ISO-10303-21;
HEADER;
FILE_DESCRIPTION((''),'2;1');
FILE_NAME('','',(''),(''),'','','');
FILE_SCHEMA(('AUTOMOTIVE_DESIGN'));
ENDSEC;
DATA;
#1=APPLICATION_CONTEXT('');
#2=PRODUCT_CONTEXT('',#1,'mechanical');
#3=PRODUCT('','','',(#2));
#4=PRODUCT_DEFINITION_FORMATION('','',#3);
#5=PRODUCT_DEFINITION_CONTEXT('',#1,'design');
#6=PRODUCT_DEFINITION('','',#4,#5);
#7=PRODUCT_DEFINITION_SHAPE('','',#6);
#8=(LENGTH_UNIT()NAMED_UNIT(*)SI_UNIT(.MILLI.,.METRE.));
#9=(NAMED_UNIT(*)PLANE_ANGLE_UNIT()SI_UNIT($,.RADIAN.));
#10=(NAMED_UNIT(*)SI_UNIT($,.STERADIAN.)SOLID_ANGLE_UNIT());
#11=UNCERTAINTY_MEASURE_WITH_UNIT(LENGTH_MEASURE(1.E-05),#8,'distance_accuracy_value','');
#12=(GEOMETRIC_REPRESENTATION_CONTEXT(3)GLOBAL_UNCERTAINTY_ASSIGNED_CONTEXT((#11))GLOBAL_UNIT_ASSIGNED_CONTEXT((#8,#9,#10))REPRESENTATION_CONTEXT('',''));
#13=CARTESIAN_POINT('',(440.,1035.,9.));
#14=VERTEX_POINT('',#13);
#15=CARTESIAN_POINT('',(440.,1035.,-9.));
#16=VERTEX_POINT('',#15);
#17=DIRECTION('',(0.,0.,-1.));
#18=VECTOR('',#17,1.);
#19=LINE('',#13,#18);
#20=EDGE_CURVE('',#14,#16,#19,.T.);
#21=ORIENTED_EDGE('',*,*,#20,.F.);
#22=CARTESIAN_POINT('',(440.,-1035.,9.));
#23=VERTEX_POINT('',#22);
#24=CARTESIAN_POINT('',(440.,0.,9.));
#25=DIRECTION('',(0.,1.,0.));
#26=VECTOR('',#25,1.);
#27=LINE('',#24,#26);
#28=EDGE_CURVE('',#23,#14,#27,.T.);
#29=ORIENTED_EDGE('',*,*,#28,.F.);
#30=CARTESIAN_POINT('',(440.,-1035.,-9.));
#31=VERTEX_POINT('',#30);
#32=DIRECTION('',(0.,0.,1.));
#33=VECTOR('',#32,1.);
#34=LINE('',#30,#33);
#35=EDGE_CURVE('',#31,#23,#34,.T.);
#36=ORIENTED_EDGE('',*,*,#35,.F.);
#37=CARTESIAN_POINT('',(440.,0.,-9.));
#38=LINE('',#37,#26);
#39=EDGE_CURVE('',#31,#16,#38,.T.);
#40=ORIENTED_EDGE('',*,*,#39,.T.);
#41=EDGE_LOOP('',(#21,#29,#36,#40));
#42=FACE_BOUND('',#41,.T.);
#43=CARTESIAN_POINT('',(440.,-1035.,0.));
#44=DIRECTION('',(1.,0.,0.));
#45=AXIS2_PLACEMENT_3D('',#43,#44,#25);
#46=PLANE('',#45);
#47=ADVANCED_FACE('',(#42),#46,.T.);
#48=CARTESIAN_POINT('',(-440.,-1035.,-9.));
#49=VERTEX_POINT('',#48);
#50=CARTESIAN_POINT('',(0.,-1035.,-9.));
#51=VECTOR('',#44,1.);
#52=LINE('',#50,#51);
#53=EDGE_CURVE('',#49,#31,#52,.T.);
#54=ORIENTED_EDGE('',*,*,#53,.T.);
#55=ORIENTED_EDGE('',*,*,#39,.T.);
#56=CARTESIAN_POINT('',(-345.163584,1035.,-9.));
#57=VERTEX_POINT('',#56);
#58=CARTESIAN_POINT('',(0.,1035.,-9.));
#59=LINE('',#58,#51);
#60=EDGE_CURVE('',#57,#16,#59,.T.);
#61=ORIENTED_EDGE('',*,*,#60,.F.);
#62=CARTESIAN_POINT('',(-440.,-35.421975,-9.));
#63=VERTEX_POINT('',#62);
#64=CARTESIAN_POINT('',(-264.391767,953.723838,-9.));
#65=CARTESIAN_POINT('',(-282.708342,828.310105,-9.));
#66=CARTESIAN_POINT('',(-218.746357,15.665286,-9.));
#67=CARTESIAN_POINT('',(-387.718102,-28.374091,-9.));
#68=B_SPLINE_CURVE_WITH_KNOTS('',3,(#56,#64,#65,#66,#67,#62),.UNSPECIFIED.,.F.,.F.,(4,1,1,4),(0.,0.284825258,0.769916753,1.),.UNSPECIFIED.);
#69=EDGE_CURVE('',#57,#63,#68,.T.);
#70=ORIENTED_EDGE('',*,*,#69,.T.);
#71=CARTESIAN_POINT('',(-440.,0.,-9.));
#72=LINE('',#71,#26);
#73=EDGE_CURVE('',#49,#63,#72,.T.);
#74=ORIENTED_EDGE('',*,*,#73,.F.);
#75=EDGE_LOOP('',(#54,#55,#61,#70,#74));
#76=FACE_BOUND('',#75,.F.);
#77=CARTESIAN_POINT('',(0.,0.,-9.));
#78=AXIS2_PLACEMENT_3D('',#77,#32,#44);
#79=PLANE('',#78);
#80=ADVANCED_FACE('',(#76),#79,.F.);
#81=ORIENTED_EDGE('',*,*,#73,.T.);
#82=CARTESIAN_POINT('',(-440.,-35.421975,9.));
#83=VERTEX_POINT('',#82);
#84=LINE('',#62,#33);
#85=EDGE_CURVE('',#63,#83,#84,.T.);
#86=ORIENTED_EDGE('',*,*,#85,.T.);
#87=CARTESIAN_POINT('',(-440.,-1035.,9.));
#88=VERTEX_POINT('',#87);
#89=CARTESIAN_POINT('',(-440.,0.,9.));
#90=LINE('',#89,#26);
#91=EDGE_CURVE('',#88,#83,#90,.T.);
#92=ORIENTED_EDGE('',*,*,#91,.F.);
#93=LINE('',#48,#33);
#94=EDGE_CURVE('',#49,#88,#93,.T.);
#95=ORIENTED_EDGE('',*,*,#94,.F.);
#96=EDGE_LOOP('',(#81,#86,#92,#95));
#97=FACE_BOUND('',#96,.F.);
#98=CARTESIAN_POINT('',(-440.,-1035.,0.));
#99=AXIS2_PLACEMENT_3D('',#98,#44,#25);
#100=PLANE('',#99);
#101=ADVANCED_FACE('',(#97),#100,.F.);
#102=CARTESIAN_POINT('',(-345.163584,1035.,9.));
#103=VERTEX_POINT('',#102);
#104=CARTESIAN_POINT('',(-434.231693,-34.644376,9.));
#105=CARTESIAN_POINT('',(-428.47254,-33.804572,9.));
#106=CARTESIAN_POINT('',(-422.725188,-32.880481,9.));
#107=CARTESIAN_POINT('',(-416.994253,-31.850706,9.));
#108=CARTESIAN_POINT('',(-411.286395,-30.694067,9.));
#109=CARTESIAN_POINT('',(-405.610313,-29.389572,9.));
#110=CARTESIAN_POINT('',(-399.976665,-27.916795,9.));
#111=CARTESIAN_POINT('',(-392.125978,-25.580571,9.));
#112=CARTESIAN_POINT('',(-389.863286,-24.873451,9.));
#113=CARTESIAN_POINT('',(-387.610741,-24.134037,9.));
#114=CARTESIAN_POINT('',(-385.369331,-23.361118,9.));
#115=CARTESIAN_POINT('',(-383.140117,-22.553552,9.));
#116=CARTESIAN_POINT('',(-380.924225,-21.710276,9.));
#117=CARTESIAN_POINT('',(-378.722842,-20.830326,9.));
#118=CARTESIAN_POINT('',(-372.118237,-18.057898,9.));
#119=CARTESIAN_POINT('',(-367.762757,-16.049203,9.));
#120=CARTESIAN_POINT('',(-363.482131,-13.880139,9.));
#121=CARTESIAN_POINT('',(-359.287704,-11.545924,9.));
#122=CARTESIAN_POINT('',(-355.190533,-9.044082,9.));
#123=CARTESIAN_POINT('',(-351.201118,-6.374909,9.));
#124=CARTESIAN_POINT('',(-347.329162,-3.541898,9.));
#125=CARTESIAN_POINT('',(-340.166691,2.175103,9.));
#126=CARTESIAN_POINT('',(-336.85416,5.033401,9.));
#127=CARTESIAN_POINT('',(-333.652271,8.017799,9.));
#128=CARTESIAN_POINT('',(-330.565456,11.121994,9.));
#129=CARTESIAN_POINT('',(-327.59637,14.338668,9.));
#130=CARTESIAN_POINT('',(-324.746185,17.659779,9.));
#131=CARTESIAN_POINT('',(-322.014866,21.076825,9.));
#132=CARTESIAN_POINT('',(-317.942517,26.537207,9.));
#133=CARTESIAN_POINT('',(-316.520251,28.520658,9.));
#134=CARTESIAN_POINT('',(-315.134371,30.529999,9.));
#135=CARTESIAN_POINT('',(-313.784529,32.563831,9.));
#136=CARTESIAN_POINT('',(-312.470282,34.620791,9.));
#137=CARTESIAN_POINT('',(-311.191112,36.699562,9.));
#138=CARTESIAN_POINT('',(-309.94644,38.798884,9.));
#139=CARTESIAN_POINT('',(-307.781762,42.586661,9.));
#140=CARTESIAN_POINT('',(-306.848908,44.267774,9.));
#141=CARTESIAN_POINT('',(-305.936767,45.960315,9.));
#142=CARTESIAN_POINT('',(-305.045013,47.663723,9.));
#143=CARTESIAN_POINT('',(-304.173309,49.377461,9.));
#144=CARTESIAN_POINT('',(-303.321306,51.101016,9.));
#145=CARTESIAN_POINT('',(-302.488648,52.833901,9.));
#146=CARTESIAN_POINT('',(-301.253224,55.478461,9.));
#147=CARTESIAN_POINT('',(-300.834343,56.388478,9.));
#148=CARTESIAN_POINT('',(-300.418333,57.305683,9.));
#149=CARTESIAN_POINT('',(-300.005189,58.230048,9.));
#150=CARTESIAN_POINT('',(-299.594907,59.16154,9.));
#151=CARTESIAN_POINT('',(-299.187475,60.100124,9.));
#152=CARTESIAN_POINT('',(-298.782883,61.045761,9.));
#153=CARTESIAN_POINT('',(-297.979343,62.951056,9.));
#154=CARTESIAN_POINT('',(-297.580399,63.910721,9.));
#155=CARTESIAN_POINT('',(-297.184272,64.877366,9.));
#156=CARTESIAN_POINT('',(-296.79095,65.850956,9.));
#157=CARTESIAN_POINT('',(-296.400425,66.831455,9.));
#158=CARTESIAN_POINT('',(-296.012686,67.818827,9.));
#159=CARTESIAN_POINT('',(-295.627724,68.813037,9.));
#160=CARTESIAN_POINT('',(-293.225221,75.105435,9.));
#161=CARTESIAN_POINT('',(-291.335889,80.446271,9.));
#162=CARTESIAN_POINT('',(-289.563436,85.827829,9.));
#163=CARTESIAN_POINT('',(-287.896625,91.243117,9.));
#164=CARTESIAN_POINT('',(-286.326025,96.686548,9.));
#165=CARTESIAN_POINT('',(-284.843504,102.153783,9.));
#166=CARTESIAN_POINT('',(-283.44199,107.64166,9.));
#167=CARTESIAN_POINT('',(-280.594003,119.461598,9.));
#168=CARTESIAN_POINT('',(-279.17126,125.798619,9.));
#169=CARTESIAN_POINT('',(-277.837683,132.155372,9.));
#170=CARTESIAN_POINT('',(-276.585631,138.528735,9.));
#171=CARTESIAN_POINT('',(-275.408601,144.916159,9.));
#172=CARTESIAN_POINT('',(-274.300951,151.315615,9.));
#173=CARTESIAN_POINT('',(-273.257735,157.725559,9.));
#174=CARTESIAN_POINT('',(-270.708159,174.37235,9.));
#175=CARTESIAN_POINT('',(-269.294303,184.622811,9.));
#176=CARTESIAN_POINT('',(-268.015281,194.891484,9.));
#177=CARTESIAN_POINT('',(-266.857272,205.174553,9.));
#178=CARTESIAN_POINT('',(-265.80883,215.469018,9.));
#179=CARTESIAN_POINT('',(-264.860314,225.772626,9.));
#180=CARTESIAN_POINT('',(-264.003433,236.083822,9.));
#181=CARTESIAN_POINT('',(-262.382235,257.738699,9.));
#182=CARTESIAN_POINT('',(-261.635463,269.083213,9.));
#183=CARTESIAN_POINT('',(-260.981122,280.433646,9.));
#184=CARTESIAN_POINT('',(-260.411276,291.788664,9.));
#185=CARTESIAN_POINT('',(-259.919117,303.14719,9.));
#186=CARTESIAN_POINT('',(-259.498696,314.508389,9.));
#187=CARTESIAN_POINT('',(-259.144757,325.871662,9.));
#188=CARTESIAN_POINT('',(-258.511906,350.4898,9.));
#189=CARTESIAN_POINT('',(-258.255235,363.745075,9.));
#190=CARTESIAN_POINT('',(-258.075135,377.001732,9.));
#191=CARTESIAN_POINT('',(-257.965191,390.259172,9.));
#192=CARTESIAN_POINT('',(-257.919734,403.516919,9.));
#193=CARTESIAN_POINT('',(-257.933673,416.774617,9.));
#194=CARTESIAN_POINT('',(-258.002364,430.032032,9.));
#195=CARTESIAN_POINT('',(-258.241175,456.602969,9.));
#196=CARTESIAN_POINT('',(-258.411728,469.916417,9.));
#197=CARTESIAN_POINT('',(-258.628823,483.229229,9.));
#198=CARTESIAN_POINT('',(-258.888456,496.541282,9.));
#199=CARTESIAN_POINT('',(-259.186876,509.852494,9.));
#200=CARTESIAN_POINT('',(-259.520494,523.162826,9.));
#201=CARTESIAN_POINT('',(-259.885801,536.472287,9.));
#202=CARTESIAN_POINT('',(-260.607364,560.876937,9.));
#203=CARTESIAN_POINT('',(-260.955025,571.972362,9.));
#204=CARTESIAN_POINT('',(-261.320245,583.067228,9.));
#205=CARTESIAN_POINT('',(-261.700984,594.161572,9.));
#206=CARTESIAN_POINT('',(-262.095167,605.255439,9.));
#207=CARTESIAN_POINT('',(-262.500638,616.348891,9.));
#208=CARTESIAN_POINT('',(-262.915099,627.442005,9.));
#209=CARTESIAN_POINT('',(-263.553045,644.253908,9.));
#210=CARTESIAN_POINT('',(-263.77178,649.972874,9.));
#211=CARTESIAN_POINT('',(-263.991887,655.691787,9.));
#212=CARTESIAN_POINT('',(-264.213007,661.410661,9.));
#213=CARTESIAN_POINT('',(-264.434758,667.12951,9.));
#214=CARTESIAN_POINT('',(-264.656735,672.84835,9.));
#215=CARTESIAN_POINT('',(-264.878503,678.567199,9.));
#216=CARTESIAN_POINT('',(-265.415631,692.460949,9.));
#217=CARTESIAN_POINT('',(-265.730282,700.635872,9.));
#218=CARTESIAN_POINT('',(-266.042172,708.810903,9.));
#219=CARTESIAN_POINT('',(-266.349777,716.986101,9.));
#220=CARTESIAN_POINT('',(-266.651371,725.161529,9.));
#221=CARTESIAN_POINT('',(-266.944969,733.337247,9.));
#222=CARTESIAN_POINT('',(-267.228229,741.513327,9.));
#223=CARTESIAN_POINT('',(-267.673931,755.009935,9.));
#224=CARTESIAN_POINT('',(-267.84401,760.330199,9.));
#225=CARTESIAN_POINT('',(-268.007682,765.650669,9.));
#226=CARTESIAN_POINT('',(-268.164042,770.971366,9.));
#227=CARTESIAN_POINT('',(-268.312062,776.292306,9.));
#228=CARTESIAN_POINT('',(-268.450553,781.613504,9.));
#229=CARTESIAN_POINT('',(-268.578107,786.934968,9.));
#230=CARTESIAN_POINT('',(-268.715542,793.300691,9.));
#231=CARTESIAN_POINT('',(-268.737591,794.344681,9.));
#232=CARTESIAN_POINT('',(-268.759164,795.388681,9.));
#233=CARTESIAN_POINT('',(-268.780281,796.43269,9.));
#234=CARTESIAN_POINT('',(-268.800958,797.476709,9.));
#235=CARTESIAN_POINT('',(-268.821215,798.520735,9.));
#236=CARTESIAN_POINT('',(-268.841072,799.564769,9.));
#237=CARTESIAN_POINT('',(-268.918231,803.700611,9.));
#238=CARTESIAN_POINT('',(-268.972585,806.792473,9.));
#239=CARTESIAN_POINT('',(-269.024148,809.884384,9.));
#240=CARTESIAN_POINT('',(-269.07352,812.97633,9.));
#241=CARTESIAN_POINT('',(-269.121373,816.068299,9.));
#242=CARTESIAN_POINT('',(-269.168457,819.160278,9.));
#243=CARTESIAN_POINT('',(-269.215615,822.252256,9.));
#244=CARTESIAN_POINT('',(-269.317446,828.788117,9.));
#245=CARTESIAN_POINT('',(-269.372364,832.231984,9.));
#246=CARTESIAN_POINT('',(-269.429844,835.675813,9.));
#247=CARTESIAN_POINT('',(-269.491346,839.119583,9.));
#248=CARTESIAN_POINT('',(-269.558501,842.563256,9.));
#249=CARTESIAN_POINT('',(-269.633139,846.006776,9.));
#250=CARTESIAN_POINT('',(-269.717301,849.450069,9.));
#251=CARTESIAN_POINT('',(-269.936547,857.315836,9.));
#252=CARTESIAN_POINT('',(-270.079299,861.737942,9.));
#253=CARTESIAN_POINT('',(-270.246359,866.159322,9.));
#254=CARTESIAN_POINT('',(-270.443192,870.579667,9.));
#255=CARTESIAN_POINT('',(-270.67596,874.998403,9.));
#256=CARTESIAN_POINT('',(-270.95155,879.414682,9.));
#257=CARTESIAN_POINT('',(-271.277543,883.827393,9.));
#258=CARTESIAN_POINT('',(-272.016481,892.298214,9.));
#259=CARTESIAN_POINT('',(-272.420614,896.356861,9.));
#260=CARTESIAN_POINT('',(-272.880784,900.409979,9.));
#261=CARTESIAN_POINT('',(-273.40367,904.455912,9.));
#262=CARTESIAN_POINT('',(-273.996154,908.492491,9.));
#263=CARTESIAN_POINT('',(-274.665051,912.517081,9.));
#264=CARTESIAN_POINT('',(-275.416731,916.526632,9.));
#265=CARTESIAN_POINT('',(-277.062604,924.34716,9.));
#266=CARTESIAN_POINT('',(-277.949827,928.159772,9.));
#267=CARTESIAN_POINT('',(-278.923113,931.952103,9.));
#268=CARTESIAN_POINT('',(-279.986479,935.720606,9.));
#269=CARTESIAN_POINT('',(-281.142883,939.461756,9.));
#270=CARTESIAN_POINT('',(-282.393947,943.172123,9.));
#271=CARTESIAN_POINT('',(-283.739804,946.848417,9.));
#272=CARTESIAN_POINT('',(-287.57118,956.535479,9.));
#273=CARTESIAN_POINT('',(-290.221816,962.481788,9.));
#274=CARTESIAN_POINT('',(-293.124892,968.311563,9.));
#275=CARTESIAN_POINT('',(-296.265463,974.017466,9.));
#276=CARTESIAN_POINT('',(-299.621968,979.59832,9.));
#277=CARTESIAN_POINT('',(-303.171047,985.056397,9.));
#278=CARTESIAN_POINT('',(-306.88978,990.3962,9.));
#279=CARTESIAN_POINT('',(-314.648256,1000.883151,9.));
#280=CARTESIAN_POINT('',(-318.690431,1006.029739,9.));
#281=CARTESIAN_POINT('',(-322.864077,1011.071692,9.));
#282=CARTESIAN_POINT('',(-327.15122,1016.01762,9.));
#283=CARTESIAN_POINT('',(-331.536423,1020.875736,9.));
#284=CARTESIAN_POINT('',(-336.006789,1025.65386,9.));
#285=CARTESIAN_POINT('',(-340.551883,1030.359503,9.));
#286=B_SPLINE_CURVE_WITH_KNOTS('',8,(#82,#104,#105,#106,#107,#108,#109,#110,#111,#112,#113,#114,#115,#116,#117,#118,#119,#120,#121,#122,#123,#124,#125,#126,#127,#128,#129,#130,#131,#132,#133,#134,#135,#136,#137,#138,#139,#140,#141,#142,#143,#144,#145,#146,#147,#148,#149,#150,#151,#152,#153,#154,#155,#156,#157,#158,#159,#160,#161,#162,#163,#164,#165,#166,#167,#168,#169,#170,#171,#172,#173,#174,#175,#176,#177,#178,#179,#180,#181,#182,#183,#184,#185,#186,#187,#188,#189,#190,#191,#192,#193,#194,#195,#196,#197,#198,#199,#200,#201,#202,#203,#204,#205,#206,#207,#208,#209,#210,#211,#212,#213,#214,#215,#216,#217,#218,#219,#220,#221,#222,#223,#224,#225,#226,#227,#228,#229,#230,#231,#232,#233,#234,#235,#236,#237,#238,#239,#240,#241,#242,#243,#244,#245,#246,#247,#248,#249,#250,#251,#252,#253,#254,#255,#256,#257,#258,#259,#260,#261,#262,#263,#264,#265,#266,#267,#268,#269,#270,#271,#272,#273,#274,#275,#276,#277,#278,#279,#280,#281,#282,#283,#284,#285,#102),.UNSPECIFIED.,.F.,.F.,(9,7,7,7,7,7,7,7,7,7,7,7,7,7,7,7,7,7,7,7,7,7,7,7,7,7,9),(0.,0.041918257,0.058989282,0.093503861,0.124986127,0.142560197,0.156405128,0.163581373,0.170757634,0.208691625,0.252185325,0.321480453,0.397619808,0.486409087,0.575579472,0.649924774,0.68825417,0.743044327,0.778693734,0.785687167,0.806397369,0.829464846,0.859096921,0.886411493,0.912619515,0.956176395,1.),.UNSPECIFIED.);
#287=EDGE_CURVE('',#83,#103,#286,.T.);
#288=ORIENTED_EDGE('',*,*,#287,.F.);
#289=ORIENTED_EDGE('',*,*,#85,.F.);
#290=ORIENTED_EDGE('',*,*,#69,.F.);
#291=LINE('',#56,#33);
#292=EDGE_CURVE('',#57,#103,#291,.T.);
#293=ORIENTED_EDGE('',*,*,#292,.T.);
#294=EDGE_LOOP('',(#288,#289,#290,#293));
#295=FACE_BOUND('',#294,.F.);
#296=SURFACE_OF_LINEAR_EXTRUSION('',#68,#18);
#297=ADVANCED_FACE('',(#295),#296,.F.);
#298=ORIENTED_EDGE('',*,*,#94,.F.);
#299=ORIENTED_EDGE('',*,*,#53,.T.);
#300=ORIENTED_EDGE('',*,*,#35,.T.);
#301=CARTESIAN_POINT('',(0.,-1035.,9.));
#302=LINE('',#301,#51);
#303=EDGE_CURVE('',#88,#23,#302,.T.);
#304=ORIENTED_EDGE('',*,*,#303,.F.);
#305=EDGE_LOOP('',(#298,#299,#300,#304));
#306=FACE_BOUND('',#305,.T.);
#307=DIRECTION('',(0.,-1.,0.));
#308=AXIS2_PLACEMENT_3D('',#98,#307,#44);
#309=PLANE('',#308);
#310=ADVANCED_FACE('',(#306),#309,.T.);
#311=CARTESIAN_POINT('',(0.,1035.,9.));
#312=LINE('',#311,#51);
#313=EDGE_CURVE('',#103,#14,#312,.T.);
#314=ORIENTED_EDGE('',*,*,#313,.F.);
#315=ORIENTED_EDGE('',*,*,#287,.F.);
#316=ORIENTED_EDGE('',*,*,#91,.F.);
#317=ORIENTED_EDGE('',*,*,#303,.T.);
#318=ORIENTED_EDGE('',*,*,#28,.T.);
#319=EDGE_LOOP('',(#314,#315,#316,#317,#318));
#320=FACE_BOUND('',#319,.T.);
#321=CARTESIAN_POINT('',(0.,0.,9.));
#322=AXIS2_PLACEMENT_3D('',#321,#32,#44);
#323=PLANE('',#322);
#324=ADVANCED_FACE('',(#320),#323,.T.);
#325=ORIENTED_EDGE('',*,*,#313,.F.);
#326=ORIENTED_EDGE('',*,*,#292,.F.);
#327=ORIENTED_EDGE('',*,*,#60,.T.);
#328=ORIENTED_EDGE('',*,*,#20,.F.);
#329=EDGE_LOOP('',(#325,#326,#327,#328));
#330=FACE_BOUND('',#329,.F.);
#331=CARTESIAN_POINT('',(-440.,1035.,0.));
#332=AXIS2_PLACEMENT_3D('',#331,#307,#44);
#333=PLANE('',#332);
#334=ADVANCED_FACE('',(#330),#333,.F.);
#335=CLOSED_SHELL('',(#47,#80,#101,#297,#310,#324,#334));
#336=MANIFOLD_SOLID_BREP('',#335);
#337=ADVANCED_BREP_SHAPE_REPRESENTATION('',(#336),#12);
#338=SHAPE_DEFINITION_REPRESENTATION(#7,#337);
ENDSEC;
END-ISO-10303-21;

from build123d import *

# Parameters (mm, degrees)
F0_W     = 880
F0_H     = 2070
F1_DEPTH = 9
F3_DEPTH = 25


with BuildPart() as f1:
    # F0 (on Top) → F1 (new body, symmetric)
    with BuildSketch(Plane.XY):
        Rectangle(F0_W, F0_H)
    extrude(amount=F1_DEPTH, both=True)

    # F2 (on face) → F3 (cut)
    with BuildSketch(Plane(origin=(0, 0, -9), x_dir=(1, 0, 0), z_dir=(0, 0, -1))):
        with BuildLine():
            Line((-440, -1035), (-345.1635837555, -1035))
            add(Edge.make_bspline(
                [(-345.1635837555, -1035), (-264.3917672013, -953.7238384219), (-282.7083415362, -828.3101050302), (-218.7463566298, -15.6652863678), (-387.7181019401, 28.374090669), (-440, 35.421974957)],
                knots=[0, 0, 0, 0, 0.2848252576, 0.7699167532, 1, 1, 1, 1], degree=3))
            Line((-440, 35.421974957), (-440, -1035))
        make_face()
    extrude(amount=-F3_DEPTH, mode=Mode.SUBTRACT)


solid = f1.part
